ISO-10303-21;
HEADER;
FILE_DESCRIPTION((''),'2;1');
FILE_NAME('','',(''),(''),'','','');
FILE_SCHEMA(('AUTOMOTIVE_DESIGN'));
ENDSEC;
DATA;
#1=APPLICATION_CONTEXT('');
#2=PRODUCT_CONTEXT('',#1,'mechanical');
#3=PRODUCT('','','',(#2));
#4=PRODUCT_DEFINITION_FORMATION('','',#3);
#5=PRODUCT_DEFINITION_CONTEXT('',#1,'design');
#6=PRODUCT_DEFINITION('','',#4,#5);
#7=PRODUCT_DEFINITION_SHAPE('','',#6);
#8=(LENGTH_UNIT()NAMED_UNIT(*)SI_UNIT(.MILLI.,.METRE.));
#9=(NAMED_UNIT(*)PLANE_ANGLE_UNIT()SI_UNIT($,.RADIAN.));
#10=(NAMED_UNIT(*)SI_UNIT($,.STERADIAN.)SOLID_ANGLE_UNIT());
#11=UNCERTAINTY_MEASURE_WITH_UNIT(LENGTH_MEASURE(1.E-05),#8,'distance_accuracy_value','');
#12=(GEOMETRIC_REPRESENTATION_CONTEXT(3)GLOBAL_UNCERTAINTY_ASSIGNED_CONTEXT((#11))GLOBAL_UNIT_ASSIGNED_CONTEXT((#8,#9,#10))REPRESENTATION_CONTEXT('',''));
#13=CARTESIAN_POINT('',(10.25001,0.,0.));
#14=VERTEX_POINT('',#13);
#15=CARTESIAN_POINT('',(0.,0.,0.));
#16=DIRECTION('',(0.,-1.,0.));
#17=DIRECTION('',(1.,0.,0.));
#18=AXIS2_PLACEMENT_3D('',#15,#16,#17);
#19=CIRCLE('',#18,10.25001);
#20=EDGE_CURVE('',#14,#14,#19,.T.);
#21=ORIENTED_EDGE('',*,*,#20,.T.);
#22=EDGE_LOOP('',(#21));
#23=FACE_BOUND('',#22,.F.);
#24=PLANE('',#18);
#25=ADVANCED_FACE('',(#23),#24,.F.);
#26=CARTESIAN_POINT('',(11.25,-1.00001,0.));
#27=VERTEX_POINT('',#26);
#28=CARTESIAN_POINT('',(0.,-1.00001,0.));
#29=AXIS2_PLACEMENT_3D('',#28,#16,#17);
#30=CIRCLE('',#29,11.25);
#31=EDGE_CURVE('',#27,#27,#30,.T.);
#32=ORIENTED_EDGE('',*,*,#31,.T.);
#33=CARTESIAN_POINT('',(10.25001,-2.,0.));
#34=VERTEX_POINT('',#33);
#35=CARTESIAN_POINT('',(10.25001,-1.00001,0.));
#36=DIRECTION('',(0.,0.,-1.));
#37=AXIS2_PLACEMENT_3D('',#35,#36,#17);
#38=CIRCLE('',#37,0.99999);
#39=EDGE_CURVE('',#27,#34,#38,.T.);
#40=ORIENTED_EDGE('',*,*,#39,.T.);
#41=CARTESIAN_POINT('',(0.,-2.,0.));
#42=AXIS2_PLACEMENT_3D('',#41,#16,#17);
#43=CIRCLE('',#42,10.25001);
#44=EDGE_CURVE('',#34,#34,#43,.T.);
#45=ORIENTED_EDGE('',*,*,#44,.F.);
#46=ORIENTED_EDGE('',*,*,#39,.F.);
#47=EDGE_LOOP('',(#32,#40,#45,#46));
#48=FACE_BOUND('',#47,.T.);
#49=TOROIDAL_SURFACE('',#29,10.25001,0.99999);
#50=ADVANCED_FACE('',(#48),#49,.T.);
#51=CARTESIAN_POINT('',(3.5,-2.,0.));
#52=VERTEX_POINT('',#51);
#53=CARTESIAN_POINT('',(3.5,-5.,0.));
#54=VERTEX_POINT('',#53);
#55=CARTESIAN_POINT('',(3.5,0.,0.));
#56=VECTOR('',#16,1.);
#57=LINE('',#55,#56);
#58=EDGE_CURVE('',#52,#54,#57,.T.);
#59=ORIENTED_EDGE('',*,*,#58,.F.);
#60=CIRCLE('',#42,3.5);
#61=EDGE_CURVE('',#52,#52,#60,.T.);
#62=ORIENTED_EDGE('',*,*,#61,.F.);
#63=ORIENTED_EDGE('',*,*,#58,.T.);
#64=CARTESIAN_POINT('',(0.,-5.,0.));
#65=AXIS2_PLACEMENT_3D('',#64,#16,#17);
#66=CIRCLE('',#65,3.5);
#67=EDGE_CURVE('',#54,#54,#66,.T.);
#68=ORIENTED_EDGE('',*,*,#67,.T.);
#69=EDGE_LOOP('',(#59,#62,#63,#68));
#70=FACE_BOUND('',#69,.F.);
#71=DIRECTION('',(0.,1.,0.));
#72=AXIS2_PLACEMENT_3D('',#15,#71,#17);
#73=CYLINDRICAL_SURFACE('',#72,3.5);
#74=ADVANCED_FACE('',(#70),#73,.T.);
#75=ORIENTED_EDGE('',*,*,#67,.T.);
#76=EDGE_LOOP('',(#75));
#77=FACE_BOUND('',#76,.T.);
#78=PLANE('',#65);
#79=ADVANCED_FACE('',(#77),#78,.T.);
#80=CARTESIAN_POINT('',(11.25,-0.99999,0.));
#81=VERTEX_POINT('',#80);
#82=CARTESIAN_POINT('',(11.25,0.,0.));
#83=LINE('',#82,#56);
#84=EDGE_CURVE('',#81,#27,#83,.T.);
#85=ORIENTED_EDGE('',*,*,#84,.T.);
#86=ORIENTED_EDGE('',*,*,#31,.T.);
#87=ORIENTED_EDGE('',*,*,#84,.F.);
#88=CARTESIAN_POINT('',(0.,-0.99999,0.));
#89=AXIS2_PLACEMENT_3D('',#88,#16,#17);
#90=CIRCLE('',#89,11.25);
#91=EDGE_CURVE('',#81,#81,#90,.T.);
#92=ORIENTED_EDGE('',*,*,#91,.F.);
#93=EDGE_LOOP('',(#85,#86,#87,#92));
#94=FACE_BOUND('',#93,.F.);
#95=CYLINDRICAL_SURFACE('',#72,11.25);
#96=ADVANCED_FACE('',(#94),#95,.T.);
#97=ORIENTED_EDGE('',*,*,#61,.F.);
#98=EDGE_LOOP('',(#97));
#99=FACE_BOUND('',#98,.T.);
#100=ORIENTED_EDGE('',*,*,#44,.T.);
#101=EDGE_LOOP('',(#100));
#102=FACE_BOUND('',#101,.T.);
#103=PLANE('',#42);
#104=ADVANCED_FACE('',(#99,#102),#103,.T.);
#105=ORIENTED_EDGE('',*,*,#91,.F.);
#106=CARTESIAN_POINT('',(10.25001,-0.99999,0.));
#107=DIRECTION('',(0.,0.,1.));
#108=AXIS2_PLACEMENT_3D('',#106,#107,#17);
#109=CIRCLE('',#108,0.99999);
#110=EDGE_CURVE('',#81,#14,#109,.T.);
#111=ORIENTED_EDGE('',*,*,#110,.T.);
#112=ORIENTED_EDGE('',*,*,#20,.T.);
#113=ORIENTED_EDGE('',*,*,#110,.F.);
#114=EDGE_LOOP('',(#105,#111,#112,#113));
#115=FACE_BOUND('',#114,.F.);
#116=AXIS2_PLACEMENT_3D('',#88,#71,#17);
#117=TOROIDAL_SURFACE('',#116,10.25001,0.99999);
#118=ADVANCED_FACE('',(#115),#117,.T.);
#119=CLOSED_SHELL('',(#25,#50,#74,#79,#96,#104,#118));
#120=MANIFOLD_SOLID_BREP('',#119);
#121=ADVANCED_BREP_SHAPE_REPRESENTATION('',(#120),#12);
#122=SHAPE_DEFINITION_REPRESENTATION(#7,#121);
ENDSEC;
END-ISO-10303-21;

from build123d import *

# Parameters (mm, degrees)
F0_R     = 3.5
F1_DEPTH = 5
F0_R_2   = 11.25
F2_DEPTH = 2
F3_R     = 0.99999


# Not quite as in the source:
# - a fillet or chamfer is up to 0.001 mm smaller than in the source, because OpenCascade refuses the exact size


with BuildPart() as f1:
    # F0 (on Front) → F1 (new body)
    with BuildSketch(Plane.XZ):
        Circle(F0_R)
    extrude(amount=F1_DEPTH)

    # F0 (on Front) → F2 (join)
    with BuildSketch(Plane.XZ):
        Circle(F0_R_2)
        Circle(F0_R, mode=Mode.SUBTRACT)
    extrude(amount=F2_DEPTH)

    # F3 (radius 1 in the source; OpenCascade refuses exactly that, so slightly less here)
    f3_edges = [f1.edges().sort_by_distance(p)[0] for p in [
        (-11.25, -2, 0),
        (-11.25, 0, 0),
    ]]
    fillet(f3_edges, radius=F3_R)


solid = f1.part
